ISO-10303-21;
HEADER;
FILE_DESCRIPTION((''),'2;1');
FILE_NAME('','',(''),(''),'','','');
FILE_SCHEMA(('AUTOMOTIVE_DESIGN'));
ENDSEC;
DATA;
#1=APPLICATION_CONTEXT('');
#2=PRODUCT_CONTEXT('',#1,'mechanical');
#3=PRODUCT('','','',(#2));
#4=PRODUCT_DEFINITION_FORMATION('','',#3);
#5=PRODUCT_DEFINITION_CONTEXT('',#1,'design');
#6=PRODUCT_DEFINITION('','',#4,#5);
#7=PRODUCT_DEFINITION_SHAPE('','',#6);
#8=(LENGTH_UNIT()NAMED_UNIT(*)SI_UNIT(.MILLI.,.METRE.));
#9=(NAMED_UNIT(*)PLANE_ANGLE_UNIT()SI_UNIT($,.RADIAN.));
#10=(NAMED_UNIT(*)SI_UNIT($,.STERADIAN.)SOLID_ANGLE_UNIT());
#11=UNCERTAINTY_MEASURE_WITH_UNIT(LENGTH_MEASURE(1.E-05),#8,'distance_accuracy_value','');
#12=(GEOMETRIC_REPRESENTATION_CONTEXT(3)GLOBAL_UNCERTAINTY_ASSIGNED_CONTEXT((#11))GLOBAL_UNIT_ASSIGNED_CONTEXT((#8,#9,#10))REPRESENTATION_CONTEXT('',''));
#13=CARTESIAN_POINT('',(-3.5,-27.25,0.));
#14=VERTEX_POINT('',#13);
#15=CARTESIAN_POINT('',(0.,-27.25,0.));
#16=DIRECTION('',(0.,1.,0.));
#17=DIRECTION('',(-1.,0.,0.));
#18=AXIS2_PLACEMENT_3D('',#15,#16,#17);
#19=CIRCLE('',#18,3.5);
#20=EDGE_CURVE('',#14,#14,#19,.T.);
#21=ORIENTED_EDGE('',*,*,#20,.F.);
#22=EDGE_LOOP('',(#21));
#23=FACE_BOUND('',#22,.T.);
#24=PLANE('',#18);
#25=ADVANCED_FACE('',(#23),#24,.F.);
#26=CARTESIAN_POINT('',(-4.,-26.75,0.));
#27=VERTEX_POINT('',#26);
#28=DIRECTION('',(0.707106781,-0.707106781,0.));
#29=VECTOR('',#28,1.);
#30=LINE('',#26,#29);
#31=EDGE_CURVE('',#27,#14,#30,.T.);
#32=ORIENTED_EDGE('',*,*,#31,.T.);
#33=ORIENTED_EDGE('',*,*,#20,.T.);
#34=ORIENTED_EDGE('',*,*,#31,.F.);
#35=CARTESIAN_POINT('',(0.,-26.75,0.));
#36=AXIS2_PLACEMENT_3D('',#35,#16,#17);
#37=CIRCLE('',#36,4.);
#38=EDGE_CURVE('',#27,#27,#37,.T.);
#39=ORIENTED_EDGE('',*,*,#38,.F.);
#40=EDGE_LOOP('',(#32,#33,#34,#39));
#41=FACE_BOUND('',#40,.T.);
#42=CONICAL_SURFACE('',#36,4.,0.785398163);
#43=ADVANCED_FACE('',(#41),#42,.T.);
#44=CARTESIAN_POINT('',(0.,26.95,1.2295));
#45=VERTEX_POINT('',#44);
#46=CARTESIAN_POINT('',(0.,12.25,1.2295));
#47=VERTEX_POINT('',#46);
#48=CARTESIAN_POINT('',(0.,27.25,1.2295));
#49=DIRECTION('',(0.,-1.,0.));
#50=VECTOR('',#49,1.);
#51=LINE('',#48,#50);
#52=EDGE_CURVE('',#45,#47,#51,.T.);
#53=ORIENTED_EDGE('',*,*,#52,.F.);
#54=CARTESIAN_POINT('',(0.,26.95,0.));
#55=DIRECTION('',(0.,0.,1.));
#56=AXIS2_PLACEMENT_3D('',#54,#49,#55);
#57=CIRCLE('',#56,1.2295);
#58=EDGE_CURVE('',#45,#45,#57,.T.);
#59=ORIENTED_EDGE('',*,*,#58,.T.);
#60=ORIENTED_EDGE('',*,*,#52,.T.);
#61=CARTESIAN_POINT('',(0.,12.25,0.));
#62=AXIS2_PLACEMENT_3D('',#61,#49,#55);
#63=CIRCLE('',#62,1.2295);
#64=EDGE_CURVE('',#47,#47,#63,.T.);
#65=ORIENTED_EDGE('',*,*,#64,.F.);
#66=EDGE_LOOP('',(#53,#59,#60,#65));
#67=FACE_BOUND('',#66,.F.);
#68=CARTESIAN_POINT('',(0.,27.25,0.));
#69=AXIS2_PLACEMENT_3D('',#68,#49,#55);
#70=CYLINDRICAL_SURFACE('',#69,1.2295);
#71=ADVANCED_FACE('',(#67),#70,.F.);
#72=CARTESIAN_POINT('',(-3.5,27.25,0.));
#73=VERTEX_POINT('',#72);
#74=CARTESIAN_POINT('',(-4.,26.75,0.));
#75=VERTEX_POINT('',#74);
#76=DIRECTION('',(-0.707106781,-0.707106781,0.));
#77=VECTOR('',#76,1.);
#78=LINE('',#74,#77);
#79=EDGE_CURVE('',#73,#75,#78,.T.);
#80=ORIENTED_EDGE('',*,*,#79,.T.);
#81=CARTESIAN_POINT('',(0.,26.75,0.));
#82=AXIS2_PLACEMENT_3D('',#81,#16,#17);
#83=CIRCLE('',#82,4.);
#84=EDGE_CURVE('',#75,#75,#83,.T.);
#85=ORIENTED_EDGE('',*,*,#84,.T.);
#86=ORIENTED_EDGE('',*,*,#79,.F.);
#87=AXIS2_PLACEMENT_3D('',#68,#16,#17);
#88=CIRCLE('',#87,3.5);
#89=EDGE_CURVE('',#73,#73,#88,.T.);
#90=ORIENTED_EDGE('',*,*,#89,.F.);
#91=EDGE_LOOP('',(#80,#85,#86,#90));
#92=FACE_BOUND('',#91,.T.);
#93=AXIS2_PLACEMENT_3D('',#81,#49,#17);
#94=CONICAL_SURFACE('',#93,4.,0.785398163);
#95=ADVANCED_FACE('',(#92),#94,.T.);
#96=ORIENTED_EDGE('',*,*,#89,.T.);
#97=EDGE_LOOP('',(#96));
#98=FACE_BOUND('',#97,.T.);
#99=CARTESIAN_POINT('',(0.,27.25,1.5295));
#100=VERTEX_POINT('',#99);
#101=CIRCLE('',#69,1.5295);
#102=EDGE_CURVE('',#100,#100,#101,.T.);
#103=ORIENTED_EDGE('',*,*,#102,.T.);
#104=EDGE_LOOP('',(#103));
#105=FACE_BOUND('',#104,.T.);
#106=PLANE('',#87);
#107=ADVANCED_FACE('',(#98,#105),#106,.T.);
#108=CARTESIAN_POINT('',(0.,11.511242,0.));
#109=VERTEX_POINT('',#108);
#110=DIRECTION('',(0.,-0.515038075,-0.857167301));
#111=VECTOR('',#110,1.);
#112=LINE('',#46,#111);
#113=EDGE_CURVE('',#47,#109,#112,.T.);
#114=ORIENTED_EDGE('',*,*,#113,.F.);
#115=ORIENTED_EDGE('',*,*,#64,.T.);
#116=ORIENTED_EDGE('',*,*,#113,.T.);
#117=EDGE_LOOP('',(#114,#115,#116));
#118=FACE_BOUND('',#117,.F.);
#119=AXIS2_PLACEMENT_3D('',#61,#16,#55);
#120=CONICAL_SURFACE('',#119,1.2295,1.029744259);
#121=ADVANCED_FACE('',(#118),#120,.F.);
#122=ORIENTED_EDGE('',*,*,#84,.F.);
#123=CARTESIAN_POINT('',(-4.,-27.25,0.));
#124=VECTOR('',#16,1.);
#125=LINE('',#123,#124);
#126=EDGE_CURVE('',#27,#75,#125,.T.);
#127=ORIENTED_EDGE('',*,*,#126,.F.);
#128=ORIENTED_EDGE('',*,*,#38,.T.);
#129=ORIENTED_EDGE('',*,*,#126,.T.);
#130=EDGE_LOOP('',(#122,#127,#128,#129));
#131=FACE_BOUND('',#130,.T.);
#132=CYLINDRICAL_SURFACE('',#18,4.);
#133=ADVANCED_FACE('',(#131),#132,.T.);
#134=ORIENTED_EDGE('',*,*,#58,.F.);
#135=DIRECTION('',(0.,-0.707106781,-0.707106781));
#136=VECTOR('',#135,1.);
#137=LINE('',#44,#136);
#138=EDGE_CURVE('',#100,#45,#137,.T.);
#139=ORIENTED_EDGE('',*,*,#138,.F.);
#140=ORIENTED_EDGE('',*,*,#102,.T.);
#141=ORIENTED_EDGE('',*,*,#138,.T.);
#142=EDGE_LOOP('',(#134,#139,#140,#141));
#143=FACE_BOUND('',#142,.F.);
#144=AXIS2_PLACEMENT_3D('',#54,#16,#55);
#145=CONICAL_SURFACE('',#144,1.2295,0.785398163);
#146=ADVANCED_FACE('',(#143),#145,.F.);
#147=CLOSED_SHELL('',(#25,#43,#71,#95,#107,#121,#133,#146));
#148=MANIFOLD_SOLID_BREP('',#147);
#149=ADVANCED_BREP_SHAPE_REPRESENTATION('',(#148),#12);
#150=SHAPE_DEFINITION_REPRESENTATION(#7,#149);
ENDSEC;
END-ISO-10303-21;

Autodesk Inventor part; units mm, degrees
ref_plane "YZ Plane" through (0, 0, 0) normal (1, 0, 0) x (0, 1, 0)
ref_plane "XZ Plane" through (0, 0, 0) normal (0, 1, 0) x (-1, 0, 0)
ref_plane "XY Plane" through (0, 0, 0) normal (0, 0, 1) x (1, 0, 0)
sketch "Sketch1" plane through (0, 0, 0) normal (0, 0, 1) x (1, 0, 0)
  line L0 (-4.8, 0) -> (0.8, 0) construction
  line L1 (0, -38.15) -> (0, 38.15) construction
  line L2 (-4, 27.25) -> (0, 27.25)
  line L3 (0, 27.25) -> (0, -27.25)
  line L4 (0, -27.25) -> (-4, -27.25)
  line L5 (-4, -27.25) -> (-4, 27.25)
  point P0 (0, 0)
  dimension "d1" = 54.5
  dimension "d16" = 8
revolve "Revolution1" add sketch "Sketch1" angle 360 about axis through (0, -10, 0) along (0, 1, 0)
sketch "Sketch2" plane through (0, 27.25, 0) normal (0, 1, 0) x (1, 0, 0)
  circle A0 centre (0, 0) radius 4 projected
hole "Hole1" at (0, 27.25, 0) direction (0, -1, 0) diameter 2.459 depth 15 tip angle 118 thread size "M3x0.5" class "6H" standard "ISO Metric profile"
mirror "Espelhar1" [suppressed]
chamfer "Chamfer1" distance 0.5 angle 45 2 edges at (4, -27.25, 0) (4, 27.25, 0)
chamfer "Chamfer2" distance 0.3 angle 45 1 edges at (0, 27.25, -1.2295)
properties part number "GRJ-05-103" material "Poliacetal WT"
